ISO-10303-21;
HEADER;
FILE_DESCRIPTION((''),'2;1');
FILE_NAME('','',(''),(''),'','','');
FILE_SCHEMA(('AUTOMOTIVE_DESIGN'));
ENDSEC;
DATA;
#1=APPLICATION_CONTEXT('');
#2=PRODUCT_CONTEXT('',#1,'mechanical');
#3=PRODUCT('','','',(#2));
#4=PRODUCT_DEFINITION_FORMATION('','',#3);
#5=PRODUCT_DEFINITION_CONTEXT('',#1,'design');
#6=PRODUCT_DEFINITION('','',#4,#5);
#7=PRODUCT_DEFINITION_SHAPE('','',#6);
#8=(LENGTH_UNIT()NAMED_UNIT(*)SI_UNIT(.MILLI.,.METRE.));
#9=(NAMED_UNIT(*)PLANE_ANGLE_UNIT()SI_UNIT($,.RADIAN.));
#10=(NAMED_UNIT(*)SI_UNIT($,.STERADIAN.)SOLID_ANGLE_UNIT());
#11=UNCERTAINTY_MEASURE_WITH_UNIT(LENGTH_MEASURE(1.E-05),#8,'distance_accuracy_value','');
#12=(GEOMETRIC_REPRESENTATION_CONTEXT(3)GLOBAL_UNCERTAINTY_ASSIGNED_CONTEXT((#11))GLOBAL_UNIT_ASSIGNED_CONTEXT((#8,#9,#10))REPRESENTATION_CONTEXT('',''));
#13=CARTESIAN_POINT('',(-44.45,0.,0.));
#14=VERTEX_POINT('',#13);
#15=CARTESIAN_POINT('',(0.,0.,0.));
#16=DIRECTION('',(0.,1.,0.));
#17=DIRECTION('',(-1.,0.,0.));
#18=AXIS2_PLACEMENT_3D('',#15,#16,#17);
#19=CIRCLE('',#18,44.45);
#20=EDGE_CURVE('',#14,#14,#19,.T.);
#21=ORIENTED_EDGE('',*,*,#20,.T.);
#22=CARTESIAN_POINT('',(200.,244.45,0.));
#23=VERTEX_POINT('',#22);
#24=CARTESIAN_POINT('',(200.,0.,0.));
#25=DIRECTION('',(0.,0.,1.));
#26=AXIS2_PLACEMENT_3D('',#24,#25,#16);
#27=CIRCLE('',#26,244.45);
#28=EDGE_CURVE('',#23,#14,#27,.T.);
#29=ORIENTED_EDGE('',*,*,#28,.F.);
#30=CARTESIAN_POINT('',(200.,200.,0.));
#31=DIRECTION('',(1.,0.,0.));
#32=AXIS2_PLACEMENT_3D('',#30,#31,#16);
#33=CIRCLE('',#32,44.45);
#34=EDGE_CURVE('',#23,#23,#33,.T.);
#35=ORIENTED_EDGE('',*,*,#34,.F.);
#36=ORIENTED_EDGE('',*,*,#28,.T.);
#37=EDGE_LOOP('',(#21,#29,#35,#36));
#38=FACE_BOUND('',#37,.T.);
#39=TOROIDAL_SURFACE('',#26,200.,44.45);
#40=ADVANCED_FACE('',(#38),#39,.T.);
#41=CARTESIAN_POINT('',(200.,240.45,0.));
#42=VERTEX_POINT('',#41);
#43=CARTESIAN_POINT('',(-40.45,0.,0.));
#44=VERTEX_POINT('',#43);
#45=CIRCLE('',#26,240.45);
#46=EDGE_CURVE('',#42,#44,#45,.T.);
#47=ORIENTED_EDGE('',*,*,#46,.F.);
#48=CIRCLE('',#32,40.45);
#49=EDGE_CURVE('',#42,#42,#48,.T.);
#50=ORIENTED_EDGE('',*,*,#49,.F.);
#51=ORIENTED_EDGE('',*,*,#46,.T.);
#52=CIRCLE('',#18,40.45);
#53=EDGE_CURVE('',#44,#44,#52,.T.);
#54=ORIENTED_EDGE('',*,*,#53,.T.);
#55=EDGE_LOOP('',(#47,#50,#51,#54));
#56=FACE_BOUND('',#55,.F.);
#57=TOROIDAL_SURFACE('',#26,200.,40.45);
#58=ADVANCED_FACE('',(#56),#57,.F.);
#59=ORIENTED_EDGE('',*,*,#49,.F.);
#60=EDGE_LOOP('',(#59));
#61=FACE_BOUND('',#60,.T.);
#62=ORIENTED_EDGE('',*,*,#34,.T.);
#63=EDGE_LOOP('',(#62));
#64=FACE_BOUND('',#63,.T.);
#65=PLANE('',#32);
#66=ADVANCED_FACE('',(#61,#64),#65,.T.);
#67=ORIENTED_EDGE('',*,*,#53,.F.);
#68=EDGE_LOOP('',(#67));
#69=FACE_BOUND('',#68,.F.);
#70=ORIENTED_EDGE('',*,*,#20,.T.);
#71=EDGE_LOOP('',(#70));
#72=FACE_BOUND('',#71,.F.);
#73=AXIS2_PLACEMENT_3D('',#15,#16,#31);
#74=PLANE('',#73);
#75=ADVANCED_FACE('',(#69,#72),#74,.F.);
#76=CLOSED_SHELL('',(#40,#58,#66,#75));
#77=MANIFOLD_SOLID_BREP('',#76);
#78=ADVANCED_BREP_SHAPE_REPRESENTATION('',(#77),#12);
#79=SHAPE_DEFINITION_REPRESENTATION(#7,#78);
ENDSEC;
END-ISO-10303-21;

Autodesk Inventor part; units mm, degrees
ref_plane "YZ Plane" through (0, 0, 0) normal (1, 0, 0) x (0, 1, 0)
ref_plane "XZ Plane" through (0, 0, 0) normal (0, 1, 0) x (-1, 0, 0)
ref_plane "XY Plane" through (0, 0, 0) normal (0, 0, 1) x (1, 0, 0)
sketch "Schizzo1" plane through (0, 0, 0) normal (0, 1, 0) x (-1, 0, 0)
  circle A0 centre (0, 0) radius 44.45
  circle A1 centre (0, 0) radius 40.45
  dimension "d0" = 88.9
  dimension "d1" = 4
sketch "Schizzo2" plane through (0, 0, 0) normal (0, 0, 1) x (1, 0, 0)
  arc A0 (200, 200) -> (0, 0) centre (200, 0) ccw
  line L0 (200, 0) -> (200, 200) construction
  line L1 (200, 0) -> (0, 0) construction
  dimension "d3" = 200
  dimension "d4" = 90
sweep "Sweep1" add profiles "Schizzo1" path "Schizzo2"
properties part number "06-01-2023 curva 90° R200"
